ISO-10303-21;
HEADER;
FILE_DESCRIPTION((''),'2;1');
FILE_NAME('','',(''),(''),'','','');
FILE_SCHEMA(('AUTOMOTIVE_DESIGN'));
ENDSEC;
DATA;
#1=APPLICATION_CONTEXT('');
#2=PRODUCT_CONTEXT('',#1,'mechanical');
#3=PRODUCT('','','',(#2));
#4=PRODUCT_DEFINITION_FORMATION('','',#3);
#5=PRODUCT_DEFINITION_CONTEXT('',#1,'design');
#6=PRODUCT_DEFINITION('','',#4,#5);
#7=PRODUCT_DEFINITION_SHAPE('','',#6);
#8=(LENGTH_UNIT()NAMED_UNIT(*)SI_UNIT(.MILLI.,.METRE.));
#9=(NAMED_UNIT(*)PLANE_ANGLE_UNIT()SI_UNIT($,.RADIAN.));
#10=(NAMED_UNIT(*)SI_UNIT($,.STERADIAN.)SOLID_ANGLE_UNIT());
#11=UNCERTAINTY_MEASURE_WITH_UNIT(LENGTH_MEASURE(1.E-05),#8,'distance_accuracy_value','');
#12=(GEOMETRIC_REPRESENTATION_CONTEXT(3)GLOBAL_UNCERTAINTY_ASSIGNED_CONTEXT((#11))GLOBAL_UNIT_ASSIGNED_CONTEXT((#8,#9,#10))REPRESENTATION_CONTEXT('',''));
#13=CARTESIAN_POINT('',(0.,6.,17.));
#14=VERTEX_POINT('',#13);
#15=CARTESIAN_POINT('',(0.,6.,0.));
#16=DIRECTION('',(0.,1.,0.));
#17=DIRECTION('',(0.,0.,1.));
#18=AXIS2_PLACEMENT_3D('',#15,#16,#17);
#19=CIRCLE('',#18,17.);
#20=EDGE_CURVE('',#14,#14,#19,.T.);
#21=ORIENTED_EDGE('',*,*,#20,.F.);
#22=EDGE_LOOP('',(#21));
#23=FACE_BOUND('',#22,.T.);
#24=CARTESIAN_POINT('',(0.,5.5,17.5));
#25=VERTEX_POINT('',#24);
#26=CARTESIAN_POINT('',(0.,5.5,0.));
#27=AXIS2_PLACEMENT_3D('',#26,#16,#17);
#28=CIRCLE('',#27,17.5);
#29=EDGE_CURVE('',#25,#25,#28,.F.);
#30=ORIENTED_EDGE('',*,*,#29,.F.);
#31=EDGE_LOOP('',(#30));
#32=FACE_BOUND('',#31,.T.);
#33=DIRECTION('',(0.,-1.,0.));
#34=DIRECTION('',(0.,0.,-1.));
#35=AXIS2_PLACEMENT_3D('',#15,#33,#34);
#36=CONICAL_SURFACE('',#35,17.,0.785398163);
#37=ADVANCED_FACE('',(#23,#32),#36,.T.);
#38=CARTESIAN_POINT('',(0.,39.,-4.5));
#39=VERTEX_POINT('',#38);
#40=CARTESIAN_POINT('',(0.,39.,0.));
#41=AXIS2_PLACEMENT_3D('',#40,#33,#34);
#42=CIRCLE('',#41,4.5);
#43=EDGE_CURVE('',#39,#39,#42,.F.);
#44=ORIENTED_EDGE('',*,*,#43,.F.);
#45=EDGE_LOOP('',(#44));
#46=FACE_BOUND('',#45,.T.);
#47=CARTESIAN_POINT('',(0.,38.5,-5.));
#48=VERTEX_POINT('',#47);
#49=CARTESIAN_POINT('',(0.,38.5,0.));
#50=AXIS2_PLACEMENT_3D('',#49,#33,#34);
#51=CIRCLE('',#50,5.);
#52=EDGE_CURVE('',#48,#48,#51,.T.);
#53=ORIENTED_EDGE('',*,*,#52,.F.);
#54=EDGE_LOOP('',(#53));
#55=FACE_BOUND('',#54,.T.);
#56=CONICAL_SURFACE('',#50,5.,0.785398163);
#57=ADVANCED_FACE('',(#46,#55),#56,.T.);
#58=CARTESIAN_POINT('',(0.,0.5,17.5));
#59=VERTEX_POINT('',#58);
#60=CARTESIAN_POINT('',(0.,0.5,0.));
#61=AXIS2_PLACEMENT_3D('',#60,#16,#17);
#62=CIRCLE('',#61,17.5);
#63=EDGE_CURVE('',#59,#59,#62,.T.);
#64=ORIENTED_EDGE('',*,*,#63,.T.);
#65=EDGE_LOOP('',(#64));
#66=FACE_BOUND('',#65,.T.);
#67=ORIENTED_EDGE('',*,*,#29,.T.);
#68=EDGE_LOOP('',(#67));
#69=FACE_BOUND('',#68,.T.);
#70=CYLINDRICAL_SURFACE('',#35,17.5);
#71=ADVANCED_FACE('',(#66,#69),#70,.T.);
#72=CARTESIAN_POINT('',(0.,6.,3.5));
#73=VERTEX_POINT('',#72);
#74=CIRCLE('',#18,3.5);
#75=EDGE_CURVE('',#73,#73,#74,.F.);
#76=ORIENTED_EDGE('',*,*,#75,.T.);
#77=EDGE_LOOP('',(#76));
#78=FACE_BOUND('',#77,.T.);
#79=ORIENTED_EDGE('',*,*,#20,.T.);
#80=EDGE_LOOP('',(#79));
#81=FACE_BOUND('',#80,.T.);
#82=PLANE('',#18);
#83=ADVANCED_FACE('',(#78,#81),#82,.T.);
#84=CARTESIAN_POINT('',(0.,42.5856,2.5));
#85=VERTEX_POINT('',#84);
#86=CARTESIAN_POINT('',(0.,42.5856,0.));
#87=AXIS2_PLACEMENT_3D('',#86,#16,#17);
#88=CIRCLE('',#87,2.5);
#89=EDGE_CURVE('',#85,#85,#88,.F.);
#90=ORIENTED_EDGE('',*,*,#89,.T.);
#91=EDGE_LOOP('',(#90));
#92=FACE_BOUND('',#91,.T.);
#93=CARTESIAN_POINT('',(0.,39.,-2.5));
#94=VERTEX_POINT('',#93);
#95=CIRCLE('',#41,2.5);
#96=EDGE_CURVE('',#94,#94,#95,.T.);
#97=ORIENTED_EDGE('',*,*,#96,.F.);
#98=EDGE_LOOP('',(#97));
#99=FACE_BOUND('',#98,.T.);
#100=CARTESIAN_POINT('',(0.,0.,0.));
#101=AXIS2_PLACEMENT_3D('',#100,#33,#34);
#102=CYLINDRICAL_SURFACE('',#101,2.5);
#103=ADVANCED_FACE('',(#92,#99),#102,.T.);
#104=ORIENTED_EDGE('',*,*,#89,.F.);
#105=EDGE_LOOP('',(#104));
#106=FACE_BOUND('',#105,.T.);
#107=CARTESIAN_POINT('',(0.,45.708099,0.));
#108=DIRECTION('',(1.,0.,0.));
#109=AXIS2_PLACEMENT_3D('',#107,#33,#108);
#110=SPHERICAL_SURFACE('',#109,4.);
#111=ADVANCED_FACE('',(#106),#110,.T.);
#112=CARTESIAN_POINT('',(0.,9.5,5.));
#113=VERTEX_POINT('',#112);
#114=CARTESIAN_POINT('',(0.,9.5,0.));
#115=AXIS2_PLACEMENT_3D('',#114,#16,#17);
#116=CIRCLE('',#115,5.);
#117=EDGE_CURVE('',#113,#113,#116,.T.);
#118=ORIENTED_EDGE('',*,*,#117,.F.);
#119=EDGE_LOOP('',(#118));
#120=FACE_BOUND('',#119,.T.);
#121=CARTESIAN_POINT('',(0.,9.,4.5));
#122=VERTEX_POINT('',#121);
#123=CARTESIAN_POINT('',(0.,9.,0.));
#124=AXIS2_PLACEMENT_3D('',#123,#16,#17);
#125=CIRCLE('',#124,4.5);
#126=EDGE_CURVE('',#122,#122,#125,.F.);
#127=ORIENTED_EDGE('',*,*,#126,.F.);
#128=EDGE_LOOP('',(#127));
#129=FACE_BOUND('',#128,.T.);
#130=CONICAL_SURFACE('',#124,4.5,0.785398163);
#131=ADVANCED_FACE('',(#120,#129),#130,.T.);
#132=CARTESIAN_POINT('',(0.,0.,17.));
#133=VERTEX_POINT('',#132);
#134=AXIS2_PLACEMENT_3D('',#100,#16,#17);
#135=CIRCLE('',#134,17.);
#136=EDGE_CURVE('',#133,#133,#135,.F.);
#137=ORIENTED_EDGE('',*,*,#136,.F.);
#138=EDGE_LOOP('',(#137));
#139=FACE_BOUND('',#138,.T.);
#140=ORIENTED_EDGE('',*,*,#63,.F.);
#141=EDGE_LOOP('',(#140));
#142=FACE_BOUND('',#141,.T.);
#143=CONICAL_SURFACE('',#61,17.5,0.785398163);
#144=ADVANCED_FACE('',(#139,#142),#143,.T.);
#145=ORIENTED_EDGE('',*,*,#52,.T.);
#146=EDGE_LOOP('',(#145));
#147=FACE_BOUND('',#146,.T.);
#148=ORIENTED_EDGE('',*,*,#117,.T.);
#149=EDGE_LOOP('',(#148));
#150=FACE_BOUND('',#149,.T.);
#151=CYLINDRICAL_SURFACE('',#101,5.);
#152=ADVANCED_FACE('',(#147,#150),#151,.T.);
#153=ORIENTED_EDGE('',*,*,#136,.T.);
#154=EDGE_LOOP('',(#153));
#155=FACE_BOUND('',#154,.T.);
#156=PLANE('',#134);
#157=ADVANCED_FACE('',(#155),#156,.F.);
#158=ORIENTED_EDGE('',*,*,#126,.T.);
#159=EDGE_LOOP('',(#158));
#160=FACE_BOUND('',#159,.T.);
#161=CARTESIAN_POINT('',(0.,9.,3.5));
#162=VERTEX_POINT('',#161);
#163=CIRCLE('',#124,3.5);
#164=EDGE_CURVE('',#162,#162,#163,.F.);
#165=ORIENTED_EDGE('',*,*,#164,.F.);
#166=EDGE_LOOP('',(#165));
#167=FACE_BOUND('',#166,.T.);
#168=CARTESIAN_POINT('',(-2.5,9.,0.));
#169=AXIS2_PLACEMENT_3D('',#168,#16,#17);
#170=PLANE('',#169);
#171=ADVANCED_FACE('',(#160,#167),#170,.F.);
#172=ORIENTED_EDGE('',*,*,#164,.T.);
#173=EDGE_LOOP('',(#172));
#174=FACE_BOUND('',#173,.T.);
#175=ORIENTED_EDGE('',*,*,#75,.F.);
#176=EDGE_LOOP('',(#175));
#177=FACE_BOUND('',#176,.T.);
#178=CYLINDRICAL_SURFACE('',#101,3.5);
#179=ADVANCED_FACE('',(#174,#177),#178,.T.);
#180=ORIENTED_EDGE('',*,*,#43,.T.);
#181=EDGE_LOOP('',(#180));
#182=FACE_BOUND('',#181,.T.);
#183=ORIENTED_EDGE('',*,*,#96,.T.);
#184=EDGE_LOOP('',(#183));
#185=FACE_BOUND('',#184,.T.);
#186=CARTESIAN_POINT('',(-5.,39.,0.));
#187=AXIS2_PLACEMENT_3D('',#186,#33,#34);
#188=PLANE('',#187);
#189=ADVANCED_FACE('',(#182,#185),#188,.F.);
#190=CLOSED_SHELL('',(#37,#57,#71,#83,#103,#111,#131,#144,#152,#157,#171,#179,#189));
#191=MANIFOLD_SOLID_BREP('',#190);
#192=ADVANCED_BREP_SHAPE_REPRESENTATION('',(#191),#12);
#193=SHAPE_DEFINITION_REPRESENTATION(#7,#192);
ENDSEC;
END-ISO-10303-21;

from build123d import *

# Parameters (mm, degrees)
SKETCH1_R                = 17.5
BOSS_EXTRUDE1_DEPTH      = 6
CHAMFER1_SIZE            = 0.5
MOVE_START               = 6
MOVE_FACE1_OUTLINE_R     = 3.5
MOVE_FACE1_OUTLINE_R_2   = 2.5
MOVE_FACE1_DEPTH         = 3
MOVE_START_2             = 39
MOVE_FACE1_2_OUTLINE_R   = 2.5
MOVE_FACE1_2_OUTLINE_R_2 = 1.5
MOVE_FACE1_2_DEPTH       = 3.585600344
CHAMFER3_SIZE            = 0.5


# Read off the part's stored shape, not the designer's step: Move Face1
with BuildPart() as part:
    # Sketch1 → Boss-Extrude1 (new body)
    with BuildSketch(Plane(origin=(0, 0, 0), x_dir=(1, 0, 0), z_dir=(0, 1, 0))):
        with Locations(Location((0, 0, 0), (0, 0, 270))):
            Circle(SKETCH1_R)
    extrude(amount=BOSS_EXTRUDE1_DEPTH)

    # Chamfer1
    chamfer1_edges = [part.edges().sort_by_distance(p)[0] for p in [
        (0, 0, -17.5),
        (0, 6, -17.5),
    ]]
    chamfer(chamfer1_edges, length=CHAMFER1_SIZE)

    # Sketch3 → Revolve3 (revolve)
    with BuildSketch(Plane.XY, mode=Mode.PRIVATE) as revolve3_sk:
        with BuildLine():
            Line((-2.5, 6), (-2.5, 9))
            Line((-2.5, 9), (-5, 9))
            Line((-5, 9), (-5, 39))
            Line((-5, 39), (-1.5, 39))
            Line((-1.5, 39), (-1.5, 42))
            ThreePointArc((-1.5, 42), (-3.92634671, 46.472168293), (0, 49.708099244))
            Line((0, 49.708099244), (0, 6))
            Line((0, 6), (-2.5, 6))
        make_face()
    revolve(revolve3_sk.sketch.rotate(Axis((0, 0, 0), (0, 1, 0)), 270), axis=Axis((0, 0, 0), (0, 1, 0)))

    # Move Face1 outline → Move Face1 (add)
    with BuildSketch(Plane(origin=(0, 0, 0), x_dir=(1, 0, 0), z_dir=(0, 1, 0)).offset(MOVE_START)):
        Circle(MOVE_FACE1_OUTLINE_R)
        Circle(MOVE_FACE1_OUTLINE_R_2, mode=Mode.SUBTRACT)
    extrude(amount=MOVE_FACE1_DEPTH)

    # Move Face1 2 outline → Move Face1 2 (add)
    with BuildSketch(Plane(origin=(0, 0, 0), x_dir=(1, 0, 0), z_dir=(0, 1, 0)).offset(MOVE_START_2)):
        Circle(MOVE_FACE1_2_OUTLINE_R)
        Circle(MOVE_FACE1_2_OUTLINE_R_2, mode=Mode.SUBTRACT)
    extrude(amount=MOVE_FACE1_2_DEPTH)

    # Chamfer3
    chamfer3_edges = [part.edges().sort_by_distance(p)[0] for p in [
        (0, 39, 5),
        (0, 9, 5),
    ]]
    chamfer(chamfer3_edges, length=CHAMFER3_SIZE)


solid = part.part
